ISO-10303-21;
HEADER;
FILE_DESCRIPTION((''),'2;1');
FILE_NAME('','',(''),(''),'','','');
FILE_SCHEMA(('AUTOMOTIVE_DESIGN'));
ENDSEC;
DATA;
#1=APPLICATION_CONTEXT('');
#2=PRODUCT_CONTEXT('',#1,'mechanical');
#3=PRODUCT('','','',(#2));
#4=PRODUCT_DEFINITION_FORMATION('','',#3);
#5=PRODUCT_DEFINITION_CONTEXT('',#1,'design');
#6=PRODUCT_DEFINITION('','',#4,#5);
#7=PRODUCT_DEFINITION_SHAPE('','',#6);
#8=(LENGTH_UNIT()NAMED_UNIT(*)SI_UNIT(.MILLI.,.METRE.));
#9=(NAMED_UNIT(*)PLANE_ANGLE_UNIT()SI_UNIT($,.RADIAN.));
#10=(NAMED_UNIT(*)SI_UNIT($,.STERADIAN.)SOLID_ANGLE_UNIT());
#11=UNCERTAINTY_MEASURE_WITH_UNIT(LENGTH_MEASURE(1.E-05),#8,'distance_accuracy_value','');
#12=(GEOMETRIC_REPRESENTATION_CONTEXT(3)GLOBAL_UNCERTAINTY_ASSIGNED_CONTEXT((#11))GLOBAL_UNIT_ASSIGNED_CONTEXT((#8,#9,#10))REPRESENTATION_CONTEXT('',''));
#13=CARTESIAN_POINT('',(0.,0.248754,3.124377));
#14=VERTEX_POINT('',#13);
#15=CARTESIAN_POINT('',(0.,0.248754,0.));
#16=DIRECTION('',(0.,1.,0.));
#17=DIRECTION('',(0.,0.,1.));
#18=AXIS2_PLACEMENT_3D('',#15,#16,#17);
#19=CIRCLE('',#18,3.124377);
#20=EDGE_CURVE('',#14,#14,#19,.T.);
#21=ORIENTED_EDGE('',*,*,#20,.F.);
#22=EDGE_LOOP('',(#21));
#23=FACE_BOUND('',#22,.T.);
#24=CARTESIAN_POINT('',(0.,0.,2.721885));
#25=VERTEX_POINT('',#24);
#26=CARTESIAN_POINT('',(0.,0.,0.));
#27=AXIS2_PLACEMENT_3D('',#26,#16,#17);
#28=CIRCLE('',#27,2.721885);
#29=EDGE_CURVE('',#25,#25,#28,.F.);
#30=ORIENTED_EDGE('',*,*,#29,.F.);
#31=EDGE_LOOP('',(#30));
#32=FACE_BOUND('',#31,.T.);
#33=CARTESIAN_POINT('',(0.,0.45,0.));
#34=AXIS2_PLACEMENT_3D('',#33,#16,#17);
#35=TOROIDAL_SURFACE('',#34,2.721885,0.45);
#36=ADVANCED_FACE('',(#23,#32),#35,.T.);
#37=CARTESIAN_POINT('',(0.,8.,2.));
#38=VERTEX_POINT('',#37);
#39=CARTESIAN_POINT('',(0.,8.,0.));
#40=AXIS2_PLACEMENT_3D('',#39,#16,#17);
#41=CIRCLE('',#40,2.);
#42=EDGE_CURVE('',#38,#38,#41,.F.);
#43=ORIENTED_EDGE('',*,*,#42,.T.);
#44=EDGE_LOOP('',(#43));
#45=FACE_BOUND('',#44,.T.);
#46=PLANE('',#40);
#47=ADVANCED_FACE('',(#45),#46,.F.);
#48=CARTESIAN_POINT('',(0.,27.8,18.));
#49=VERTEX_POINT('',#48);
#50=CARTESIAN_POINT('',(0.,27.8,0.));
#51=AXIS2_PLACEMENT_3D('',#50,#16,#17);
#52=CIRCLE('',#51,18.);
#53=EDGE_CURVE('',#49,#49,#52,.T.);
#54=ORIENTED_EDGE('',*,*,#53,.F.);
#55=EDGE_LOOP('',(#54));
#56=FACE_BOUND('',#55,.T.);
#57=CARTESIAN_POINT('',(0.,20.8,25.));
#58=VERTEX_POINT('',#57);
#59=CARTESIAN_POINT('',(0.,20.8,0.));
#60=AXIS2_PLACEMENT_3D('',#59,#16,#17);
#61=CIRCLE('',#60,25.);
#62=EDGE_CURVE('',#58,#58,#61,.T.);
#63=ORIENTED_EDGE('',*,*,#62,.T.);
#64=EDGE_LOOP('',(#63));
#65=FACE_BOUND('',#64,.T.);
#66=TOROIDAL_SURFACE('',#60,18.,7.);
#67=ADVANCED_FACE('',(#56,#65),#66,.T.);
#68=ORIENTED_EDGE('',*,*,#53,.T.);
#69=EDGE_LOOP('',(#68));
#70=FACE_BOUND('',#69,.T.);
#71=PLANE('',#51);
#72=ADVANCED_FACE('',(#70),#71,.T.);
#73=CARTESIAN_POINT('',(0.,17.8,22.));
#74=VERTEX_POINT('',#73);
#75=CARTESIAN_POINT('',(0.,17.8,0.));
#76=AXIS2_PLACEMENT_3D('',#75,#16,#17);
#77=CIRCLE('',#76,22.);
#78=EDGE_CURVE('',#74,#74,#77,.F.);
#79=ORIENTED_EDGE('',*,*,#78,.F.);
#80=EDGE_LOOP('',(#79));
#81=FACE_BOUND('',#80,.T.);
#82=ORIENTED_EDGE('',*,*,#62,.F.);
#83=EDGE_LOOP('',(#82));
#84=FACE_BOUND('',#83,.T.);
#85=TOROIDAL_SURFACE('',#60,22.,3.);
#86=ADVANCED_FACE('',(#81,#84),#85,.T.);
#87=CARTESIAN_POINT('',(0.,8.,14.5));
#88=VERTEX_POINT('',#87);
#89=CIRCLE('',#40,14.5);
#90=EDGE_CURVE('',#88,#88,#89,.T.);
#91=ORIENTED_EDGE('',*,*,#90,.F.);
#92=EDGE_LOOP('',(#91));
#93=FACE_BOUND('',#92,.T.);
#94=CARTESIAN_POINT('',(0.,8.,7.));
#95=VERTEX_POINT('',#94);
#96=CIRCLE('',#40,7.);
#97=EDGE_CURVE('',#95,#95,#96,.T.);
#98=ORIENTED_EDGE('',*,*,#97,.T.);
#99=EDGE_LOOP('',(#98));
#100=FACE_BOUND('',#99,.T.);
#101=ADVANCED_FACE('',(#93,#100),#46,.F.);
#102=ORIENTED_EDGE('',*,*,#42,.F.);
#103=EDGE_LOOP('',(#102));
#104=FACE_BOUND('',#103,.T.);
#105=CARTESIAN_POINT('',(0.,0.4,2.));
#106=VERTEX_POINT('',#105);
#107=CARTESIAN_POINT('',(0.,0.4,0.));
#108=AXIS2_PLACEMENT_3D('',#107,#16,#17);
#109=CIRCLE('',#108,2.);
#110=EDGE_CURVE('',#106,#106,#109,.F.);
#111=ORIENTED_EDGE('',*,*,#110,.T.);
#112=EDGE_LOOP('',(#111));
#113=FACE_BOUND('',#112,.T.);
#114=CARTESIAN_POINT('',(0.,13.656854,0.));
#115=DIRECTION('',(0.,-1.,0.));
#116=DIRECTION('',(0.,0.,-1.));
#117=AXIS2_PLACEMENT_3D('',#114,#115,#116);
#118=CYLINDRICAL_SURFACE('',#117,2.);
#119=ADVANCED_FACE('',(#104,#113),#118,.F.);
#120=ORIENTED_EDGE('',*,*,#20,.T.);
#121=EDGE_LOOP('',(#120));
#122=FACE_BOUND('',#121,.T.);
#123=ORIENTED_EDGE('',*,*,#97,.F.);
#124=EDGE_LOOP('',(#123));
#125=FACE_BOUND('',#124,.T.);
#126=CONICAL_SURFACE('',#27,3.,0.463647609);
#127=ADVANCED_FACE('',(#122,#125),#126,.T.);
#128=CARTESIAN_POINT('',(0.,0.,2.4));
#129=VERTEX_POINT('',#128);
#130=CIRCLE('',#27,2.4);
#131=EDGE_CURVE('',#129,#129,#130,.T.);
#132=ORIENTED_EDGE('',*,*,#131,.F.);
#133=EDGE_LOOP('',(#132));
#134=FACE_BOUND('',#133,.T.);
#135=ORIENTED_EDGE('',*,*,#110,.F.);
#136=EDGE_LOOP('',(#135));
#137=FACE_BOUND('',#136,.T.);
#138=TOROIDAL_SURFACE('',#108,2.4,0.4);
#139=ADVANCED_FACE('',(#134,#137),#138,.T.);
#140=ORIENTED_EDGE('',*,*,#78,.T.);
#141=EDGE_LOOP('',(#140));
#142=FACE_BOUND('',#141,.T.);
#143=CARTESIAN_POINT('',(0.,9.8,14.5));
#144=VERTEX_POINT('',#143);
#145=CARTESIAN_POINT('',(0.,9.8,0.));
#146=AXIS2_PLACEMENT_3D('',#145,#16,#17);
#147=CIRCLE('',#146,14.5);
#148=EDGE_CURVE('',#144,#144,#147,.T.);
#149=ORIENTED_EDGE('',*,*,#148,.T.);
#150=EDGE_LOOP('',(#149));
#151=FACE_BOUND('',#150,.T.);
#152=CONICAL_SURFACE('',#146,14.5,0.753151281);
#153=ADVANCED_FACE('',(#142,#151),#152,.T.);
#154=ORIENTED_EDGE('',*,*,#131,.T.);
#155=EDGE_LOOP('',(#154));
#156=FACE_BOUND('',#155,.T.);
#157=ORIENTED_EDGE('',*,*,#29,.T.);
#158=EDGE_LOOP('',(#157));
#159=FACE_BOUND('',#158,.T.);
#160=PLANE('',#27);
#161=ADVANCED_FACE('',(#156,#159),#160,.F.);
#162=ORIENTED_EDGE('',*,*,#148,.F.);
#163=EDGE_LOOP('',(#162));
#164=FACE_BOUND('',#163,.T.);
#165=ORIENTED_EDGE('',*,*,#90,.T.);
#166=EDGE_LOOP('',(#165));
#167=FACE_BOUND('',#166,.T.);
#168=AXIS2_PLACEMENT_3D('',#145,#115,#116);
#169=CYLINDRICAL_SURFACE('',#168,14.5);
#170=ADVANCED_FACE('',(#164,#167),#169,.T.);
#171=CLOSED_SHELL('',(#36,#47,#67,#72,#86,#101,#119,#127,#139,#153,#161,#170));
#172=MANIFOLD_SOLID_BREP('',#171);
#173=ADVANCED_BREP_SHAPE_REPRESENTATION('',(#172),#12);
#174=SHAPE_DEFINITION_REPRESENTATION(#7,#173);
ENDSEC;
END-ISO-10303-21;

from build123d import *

# Parameters (mm, degrees)
SKETCH1_R           = 3
SKETCH2_R           = 7
SKETCH3_R           = 2
CUT_EXTRUDE1_DEPTH  = 8
FILLET1_R           = 0.45
FILLET2_R           = 0.4
SKETCH4_R           = 14.5
BOSS_EXTRUDE1_DEPTH = 1.8
SKETCH5_R           = 25
BOSS_EXTRUDE2_DEPTH = 3
FILLET3_R           = 3
SKETCH7_R           = 14.5
SKETCH6_R           = 22
SKETCH8_R           = 25
BOSS_EXTRUDE3_DEPTH = 7
FILLET4_R           = 7


with BuildPart() as part:
    # Sketch1 → Loft1 section 0
    with BuildSketch(Plane(origin=(0, 0, 0), x_dir=(1, 0, 0), z_dir=(0, 1, 0))):
        Circle(SKETCH1_R)
    # Sketch2 → Loft1 section 1
    with BuildSketch(Plane(origin=(0, 8, 0), x_dir=(1, 0, 0), z_dir=(0, 1, 0))):
        Circle(SKETCH2_R)
    loft()

    # Sketch3 → Cut-Extrude1 (cut)
    with BuildSketch(Plane.XZ):
        with Locations(Location((0, 0, 0), (0, 0, 270))):
            Circle(SKETCH3_R)
    extrude(amount=-CUT_EXTRUDE1_DEPTH, mode=Mode.SUBTRACT)

    # Fillet1
    fillet1_edges = [part.edges().sort_by_distance(p)[0] for p in [
        (-3, 0, 0),
    ]]
    fillet(fillet1_edges, radius=FILLET1_R)

    # Fillet2
    fillet2_edges = [part.edges().sort_by_distance(p)[0] for p in [
        (0, 0, 2),
    ]]
    fillet(fillet2_edges, radius=FILLET2_R)

    # Sketch4 → Boss-Extrude1 (add)
    with BuildSketch(Plane(origin=(0, 8, 0), x_dir=(1, 0, 0), z_dir=(0, 1, 0))):
        with Locations(Location((0, 0, 0), (0, 0, 270))):
            Circle(SKETCH4_R)
    extrude(amount=BOSS_EXTRUDE1_DEPTH)



with BuildPart() as body_2:
    # Sketch5 → Boss-Extrude2 (new body)
    with BuildSketch(Plane(origin=(0, 17.8, 0), x_dir=(1, 0, 0), z_dir=(0, 1, 0))):
        with Locations(Location((0, 0, 0), (0, 0, 270))):
            Circle(SKETCH5_R)
    extrude(amount=BOSS_EXTRUDE2_DEPTH)

    # Fillet3
    fillet3_edges = [body_2.edges().sort_by_distance(p)[0] for p in [
        (0, 17.8, -25),
    ]]
    fillet(fillet3_edges, radius=FILLET3_R - 0.0001)  # a hair under: the kernel refuses the full size


with BuildPart() as part_1:
    add(part.part)

    add(body_2.part)  # Loft3 merges body 2
    # Sketch7 → Loft3 section 0
    with BuildSketch(Plane(origin=(0, 9.8, 0), x_dir=(1, 0, 0), z_dir=(0, 1, 0))):
        Circle(SKETCH7_R)
    # Sketch6 → Loft3 section 1
    with BuildSketch(Plane.XZ.offset(-17.8)):
        Circle(SKETCH6_R)
    loft()

    # Sketch8 → Boss-Extrude3 (add)
    with BuildSketch(Plane(origin=(0, 20.8, 0), x_dir=(1, 0, 0), z_dir=(0, 1, 0))):
        with Locations(Location((0, 0, 0), (0, 0, 270))):
            Circle(SKETCH8_R)
    extrude(amount=BOSS_EXTRUDE3_DEPTH)

    # Fillet4
    fillet4_edges = [part_1.edges().sort_by_distance(p)[0] for p in [
        (0, 27.8, -25),
    ]]
    fillet(fillet4_edges, radius=FILLET4_R)


solid = part_1.part
